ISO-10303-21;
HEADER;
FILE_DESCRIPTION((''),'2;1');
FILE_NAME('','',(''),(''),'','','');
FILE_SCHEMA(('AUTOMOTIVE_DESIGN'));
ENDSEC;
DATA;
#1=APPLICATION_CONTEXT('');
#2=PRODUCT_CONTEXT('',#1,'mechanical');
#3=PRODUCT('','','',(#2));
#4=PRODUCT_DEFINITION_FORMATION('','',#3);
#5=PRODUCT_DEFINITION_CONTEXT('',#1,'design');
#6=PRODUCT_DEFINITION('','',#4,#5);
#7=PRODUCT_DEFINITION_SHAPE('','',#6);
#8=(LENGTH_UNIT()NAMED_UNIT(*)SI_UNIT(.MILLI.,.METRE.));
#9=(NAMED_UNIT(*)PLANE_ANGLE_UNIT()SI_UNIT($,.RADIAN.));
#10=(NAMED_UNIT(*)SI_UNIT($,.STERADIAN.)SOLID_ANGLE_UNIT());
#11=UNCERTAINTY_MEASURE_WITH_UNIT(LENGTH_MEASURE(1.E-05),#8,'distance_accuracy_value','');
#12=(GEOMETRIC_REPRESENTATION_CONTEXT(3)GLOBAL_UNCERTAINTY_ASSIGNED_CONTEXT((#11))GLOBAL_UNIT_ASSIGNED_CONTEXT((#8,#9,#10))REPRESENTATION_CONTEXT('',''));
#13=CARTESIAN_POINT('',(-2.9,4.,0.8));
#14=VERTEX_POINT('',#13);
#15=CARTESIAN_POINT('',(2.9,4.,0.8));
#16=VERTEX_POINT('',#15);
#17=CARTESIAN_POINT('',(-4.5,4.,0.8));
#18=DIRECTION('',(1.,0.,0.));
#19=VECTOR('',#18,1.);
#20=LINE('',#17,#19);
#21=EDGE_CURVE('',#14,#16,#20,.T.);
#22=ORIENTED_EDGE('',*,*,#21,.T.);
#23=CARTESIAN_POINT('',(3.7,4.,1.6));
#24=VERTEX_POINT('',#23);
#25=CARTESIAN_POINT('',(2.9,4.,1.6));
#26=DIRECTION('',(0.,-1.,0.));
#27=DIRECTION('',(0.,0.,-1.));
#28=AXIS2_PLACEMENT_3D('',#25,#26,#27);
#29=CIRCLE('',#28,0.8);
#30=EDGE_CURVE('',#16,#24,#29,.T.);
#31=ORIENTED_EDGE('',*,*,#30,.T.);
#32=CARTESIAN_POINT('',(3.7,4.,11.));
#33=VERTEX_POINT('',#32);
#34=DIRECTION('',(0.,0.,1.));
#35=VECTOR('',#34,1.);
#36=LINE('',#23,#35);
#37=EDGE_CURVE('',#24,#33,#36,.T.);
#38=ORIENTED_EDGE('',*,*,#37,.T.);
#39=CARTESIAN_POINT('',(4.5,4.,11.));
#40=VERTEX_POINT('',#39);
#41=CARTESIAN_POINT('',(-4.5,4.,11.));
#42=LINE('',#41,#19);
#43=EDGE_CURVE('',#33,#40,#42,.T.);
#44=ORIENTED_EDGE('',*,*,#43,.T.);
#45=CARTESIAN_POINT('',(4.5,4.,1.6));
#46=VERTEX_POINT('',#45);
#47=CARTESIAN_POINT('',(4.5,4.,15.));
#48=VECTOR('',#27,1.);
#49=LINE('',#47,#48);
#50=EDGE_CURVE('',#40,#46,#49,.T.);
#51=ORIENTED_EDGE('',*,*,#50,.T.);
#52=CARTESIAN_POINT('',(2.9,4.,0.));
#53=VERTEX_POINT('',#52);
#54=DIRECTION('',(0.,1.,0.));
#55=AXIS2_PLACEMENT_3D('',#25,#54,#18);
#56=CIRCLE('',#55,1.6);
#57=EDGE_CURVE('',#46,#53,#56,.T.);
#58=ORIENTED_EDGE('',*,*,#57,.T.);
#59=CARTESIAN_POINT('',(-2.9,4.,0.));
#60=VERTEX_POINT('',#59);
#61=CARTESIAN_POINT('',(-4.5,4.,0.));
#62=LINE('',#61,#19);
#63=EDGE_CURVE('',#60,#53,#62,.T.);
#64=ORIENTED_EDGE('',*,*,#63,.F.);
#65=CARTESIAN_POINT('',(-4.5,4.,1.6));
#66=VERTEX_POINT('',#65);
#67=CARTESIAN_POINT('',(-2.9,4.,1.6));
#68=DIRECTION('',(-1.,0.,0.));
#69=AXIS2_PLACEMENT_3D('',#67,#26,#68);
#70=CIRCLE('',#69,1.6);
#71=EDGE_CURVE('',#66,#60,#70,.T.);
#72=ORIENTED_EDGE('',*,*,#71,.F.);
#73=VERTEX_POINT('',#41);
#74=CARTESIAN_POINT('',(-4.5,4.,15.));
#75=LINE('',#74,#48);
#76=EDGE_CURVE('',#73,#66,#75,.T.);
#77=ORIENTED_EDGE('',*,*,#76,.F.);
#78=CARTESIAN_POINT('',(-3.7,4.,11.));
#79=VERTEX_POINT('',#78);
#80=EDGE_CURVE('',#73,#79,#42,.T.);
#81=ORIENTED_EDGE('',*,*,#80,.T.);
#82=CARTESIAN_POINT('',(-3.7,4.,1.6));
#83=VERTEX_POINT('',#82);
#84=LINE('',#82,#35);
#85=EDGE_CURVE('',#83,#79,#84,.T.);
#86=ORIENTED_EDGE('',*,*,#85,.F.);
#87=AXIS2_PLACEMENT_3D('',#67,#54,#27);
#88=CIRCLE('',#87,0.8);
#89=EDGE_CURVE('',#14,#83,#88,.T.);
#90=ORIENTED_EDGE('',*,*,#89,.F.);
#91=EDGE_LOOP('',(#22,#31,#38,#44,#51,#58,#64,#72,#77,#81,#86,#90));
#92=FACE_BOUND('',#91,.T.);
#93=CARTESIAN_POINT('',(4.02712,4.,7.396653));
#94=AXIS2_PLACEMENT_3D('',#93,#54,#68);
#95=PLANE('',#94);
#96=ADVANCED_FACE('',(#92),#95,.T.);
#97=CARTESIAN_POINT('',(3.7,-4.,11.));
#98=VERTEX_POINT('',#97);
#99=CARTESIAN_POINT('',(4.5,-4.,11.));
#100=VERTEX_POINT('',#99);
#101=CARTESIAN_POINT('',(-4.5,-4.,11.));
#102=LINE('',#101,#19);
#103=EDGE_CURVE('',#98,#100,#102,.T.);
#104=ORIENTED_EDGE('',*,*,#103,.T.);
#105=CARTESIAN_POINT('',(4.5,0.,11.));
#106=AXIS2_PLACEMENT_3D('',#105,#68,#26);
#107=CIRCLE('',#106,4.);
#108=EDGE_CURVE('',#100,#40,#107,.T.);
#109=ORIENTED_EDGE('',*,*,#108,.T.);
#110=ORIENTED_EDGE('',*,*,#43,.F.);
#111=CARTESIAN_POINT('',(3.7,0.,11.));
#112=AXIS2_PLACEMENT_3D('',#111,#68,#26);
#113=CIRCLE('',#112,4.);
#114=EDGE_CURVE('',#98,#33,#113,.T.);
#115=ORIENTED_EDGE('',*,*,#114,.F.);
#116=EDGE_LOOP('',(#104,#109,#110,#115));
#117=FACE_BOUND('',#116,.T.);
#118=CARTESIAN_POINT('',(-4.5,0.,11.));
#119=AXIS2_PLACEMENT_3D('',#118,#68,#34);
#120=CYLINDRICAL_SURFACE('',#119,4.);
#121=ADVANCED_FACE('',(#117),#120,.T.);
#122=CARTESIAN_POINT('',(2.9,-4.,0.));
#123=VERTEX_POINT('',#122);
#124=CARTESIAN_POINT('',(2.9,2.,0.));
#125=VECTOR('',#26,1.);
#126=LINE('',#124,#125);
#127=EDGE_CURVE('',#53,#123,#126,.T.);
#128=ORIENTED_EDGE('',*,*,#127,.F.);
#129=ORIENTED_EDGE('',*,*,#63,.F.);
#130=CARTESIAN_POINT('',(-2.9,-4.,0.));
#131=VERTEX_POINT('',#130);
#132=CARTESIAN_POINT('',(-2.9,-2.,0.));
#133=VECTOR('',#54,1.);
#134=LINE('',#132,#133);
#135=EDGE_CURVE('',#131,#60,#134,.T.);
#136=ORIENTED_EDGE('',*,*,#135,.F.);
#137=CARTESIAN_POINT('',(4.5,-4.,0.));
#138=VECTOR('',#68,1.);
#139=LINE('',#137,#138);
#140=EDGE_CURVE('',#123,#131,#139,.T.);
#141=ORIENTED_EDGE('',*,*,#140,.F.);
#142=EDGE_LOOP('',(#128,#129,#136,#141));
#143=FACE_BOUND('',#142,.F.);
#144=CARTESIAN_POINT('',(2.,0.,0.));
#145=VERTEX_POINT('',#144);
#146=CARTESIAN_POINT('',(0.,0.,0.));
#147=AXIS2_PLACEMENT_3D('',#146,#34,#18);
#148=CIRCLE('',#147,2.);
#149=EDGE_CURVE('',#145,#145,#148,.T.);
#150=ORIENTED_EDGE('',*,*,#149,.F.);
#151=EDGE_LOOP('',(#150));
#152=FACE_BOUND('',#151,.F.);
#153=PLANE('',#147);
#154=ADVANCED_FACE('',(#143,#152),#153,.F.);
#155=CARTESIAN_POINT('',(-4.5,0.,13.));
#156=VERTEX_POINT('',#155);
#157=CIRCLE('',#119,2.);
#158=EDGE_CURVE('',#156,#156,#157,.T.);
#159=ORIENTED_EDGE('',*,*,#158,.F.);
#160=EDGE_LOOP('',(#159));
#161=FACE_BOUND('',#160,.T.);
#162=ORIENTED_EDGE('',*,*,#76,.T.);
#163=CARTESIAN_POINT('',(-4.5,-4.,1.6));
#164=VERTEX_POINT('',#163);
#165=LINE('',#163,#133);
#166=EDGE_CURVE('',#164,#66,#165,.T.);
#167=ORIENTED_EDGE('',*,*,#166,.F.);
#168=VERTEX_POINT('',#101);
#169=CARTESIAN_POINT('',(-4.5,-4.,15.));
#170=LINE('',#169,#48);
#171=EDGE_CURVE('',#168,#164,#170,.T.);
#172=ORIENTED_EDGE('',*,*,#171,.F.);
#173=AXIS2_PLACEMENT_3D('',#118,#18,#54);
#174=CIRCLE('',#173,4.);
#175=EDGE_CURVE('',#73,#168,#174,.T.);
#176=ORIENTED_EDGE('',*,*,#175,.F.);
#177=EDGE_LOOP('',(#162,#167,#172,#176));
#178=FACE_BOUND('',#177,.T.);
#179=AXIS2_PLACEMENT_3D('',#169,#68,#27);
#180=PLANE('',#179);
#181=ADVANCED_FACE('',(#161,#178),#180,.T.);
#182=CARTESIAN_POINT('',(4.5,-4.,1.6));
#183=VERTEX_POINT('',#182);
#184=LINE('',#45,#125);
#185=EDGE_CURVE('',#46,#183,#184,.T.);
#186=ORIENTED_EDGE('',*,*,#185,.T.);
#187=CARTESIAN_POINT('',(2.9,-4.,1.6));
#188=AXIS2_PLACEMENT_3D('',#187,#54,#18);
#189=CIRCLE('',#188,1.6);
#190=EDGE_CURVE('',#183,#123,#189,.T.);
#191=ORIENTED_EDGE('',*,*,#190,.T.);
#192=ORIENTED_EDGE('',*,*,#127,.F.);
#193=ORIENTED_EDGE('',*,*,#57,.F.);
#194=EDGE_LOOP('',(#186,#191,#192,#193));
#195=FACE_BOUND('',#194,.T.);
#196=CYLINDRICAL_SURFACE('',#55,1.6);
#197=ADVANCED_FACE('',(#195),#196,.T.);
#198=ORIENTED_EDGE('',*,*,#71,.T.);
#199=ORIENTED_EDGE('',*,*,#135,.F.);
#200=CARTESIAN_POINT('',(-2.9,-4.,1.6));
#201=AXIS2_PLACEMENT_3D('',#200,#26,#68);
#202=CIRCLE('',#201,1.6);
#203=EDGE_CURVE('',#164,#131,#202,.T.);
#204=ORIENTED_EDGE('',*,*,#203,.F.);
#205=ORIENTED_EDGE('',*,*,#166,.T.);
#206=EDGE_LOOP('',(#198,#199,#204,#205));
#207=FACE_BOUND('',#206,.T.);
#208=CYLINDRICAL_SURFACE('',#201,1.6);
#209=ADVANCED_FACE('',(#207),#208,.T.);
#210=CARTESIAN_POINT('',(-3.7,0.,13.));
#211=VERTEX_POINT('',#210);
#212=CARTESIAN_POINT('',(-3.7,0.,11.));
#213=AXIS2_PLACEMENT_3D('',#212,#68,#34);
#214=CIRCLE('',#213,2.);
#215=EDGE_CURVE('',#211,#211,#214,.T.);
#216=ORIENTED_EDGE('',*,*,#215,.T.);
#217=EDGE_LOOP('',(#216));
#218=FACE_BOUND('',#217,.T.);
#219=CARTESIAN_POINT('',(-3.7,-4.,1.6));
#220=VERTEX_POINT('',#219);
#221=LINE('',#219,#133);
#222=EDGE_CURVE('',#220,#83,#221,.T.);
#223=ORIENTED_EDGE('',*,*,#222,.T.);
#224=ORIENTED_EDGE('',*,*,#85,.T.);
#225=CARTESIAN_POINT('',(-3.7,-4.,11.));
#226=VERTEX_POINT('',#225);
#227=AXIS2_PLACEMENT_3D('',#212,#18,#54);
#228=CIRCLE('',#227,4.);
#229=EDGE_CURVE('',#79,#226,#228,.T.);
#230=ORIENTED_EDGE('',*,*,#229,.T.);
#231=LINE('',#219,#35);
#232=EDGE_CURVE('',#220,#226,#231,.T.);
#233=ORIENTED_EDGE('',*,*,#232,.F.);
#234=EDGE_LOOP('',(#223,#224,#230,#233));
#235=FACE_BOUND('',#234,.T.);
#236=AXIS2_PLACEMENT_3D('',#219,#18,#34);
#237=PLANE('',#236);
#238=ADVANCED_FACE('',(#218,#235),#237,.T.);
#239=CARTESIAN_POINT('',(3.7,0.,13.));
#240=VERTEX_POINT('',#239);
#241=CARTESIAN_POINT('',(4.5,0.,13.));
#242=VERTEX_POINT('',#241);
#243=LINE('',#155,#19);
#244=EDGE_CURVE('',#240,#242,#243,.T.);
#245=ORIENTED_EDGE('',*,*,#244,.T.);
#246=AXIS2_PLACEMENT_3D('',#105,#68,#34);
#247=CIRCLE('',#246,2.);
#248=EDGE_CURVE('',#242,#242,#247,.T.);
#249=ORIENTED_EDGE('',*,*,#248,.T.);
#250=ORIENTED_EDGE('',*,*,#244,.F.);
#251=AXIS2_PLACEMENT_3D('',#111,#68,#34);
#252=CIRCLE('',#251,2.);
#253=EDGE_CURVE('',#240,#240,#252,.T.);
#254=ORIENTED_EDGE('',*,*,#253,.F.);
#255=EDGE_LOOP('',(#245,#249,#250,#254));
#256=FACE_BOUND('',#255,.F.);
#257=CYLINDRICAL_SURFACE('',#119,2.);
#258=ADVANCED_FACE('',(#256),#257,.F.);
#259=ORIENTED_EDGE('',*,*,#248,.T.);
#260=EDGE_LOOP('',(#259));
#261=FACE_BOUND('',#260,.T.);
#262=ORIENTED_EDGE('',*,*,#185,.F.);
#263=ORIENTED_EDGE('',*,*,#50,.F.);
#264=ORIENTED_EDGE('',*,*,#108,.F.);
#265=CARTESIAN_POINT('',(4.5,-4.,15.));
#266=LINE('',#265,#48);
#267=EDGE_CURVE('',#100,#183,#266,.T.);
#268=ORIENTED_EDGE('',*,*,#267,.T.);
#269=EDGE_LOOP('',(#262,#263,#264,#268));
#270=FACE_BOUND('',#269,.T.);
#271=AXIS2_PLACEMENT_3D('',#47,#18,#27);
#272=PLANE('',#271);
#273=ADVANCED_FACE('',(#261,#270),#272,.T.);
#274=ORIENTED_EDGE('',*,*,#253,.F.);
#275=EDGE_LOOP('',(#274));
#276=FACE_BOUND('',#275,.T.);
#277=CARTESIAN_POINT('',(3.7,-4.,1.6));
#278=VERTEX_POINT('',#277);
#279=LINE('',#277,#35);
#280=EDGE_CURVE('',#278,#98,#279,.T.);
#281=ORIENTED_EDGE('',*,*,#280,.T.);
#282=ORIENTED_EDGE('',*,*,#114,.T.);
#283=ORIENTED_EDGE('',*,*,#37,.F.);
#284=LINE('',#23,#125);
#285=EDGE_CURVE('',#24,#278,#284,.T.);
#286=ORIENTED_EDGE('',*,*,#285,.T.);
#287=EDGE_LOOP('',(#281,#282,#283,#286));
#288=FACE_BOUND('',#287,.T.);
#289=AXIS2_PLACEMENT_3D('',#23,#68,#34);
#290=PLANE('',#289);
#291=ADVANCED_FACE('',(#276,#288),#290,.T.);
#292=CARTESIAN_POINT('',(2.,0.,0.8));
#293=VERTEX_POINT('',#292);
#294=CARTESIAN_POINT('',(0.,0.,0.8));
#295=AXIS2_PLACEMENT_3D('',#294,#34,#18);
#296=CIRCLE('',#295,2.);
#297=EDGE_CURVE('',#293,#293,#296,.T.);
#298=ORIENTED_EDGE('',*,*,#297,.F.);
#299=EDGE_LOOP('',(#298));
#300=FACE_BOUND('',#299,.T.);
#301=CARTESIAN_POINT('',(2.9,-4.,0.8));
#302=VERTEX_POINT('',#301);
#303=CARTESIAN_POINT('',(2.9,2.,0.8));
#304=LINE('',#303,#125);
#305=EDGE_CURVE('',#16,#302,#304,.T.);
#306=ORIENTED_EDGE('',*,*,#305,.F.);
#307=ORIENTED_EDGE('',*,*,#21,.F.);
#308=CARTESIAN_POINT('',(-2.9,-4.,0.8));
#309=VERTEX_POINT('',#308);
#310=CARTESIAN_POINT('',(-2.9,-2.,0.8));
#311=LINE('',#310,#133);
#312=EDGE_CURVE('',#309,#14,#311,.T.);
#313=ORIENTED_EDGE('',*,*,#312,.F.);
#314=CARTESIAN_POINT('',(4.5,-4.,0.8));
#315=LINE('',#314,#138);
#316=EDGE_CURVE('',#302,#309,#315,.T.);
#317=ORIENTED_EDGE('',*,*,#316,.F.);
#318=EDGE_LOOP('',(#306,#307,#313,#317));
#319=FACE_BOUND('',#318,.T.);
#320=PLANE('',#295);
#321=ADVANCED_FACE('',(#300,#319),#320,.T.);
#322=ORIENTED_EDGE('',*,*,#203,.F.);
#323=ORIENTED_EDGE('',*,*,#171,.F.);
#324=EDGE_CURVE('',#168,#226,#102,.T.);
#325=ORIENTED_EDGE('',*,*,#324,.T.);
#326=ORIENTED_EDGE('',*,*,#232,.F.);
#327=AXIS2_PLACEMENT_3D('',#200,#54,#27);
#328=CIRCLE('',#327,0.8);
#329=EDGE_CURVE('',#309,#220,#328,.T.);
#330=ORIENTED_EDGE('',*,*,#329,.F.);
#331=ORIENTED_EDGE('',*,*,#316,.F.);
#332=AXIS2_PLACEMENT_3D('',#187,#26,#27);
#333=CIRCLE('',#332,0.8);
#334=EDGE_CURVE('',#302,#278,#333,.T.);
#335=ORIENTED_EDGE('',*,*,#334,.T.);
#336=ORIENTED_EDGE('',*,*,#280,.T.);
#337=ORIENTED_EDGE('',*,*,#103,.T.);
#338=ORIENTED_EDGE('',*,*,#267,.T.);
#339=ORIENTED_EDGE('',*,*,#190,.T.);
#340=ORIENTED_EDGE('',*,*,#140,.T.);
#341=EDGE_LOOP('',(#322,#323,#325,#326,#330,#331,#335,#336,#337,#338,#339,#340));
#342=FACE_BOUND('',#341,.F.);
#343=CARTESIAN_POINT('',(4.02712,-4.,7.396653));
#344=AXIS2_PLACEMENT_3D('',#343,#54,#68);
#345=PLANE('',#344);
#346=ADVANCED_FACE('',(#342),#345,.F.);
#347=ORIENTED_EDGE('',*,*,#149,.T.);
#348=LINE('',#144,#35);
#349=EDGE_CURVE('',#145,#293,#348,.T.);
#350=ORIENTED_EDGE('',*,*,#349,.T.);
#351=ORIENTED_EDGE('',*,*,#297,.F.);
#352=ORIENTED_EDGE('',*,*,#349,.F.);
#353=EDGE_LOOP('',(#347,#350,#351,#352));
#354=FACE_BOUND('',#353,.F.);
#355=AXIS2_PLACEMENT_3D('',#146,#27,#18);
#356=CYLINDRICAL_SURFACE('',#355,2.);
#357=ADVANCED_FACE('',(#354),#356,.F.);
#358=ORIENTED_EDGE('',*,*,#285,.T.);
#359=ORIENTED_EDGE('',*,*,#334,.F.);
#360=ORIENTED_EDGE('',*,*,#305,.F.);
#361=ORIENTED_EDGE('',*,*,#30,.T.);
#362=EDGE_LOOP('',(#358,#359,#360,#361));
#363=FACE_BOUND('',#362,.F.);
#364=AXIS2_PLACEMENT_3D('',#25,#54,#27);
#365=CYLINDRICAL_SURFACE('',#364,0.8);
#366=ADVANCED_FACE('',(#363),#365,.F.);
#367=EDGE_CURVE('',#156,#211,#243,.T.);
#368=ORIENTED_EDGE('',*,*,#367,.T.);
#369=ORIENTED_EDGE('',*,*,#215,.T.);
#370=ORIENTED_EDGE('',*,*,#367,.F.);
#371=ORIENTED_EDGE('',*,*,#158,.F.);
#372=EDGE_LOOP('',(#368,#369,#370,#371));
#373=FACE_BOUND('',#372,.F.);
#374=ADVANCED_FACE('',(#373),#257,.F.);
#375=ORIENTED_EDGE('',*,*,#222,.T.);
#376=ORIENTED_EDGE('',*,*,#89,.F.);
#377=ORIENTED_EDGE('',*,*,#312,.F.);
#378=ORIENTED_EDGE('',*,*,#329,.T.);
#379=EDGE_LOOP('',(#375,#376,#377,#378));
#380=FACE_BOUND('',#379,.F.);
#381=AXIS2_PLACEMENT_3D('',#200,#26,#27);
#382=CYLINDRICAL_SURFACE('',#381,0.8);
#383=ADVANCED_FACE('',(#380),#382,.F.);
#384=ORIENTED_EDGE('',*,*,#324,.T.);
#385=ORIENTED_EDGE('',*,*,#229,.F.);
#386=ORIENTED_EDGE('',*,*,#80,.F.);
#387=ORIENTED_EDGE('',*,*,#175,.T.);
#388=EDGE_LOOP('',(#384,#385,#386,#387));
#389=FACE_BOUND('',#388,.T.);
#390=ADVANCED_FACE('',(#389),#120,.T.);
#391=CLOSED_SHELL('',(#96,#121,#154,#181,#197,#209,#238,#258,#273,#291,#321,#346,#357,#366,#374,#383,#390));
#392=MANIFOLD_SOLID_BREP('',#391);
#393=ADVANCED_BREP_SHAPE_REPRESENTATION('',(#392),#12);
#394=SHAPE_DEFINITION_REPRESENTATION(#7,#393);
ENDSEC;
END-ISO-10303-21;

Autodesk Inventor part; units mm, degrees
ref_plane "YZ Plane" through (0, 0, 0) normal (1, 0, 0) x (0, 1, 0)
ref_plane "XZ Plane" through (0, 0, 0) normal (0, 1, 0) x (-1, 0, 0)
ref_plane "XY Plane" through (0, 0, 0) normal (0, 0, 1) x (1, 0, 0)
sketch "Sketch1" plane through (0, 0, 0) normal (0, 0, 1) x (1, 0, 0)
  circle A0 centre (0, 0) radius 2
  line L0 (-4.5, 4) -> (4.5, 4)
  line L1 (4.5, 4) -> (4.5, -4)
  line L2 (4.5, -4) -> (-4.5, -4)
  line L3 (-4.5, -4) -> (-4.5, 4)
  line L4 (-4.5, 4) -> (4.5, -4) construction
  dimension "d0" = 4
  dimension "d1" = 8
  dimension "d2" = 9
extrude "Plate1" add sketch "Sketch1" along normal blind 0.8
sketch "Sketch2" plane through (3.7, 4, 0) normal (1, 0, 0) x (0, 1, 0)
  line L0 (-8, 0) -> (0, 0)
  line L1 (0, 0) -> (0, 15)
  line L2 (0, 15) -> (-8, 15)
  line L3 (-8, 15) -> (-8, 0)
edge flange "Flange1" height 15 angle 90 thickness 0.8 bend radius 0.8 thickness toward (1, 0, 0) relief tear relief width 0.8 relief depth 0.4 corner gap 0.8 corner form 0 edges at (4.5, 0, 0.8) (-4.5, 0, 0.8) wall of the first edge with corners at (3.7, -4, 0) (3.7, 4, 0) (3.7, 4, 15) (3.7, -4, 15)
bend "Bend1"
corner "Corner1"
sketch "Sketch3" plane through (-4.5, -4, 15) normal (-1, 0, 0) x (0, 0, 1)
  line L0 (-13.4, 8) -> (-13.4, 0) construction
  line L1 (0, 0) -> (-13.4, 0) projected
  line L2 (0, 8) -> (0, 0) projected
  line L3 (-13.4, 8) -> (0, 8) projected
  circle A0 centre (-4, 4) radius 4
  point P0 (-15, 4)
  point P1 (-4, 8)
  point P2 (0, 4)
  point P3 (-4, 0)
extrude "Cut1" cut sketch "Sketch3" against normal through all contours L1 A0 L2 | A0 L3 L2
sketch "Sketch4" plane through (-4.5, -4, 1.6) normal (-1, 0, 0) x (0, 0, 1)
  arc A0 (9.4, 0) -> (9.4, 8) centre (9.4, 4) ccw projected
  circle A1 centre (9.4, 4) radius 2
  point P0 (-1.6, 4)
  dimension "d16" = 4
extrude "Cut2" cut sketch "Sketch4" against normal through all
equation "\"d14\" = Thickness"
equation "\"d17\" = Thickness"
equation "\"d3\" = Thickness"
equation "\"d4\" = BendReliefWidth"
equation "\"d5\" = BendReliefDepth"
equation "\"d6\" = MinimumRemnant"
equation "\"d7\" = TransitionRadius"
equation "\"d10\" = BendRadius"
equation "\"d11\" = CornerReliefSize"
equation "\"d12\" = GapSize"
equation "\"d13\" = JacobiRadiusSize"
equation "\"BendRadius\" = Thickness"
equation "\"BendReliefWidth\" = Thickness"
equation "\"BendReliefDepth\" = 0.5 * Thickness"
equation "\"CornerReliefSize\" = 4 * Thickness"
equation "\"MinimumRemnant\" = 2 * Thickness"
equation "\"TransitionRadius\" = BendRadius"
equation "\"JacobiRadiusSize\" = BendRadius"
equation "\"GapSize\" = Thickness"
equation "\"Thickness\" = 0.8"
properties part number "LA-T8-Bracket"
